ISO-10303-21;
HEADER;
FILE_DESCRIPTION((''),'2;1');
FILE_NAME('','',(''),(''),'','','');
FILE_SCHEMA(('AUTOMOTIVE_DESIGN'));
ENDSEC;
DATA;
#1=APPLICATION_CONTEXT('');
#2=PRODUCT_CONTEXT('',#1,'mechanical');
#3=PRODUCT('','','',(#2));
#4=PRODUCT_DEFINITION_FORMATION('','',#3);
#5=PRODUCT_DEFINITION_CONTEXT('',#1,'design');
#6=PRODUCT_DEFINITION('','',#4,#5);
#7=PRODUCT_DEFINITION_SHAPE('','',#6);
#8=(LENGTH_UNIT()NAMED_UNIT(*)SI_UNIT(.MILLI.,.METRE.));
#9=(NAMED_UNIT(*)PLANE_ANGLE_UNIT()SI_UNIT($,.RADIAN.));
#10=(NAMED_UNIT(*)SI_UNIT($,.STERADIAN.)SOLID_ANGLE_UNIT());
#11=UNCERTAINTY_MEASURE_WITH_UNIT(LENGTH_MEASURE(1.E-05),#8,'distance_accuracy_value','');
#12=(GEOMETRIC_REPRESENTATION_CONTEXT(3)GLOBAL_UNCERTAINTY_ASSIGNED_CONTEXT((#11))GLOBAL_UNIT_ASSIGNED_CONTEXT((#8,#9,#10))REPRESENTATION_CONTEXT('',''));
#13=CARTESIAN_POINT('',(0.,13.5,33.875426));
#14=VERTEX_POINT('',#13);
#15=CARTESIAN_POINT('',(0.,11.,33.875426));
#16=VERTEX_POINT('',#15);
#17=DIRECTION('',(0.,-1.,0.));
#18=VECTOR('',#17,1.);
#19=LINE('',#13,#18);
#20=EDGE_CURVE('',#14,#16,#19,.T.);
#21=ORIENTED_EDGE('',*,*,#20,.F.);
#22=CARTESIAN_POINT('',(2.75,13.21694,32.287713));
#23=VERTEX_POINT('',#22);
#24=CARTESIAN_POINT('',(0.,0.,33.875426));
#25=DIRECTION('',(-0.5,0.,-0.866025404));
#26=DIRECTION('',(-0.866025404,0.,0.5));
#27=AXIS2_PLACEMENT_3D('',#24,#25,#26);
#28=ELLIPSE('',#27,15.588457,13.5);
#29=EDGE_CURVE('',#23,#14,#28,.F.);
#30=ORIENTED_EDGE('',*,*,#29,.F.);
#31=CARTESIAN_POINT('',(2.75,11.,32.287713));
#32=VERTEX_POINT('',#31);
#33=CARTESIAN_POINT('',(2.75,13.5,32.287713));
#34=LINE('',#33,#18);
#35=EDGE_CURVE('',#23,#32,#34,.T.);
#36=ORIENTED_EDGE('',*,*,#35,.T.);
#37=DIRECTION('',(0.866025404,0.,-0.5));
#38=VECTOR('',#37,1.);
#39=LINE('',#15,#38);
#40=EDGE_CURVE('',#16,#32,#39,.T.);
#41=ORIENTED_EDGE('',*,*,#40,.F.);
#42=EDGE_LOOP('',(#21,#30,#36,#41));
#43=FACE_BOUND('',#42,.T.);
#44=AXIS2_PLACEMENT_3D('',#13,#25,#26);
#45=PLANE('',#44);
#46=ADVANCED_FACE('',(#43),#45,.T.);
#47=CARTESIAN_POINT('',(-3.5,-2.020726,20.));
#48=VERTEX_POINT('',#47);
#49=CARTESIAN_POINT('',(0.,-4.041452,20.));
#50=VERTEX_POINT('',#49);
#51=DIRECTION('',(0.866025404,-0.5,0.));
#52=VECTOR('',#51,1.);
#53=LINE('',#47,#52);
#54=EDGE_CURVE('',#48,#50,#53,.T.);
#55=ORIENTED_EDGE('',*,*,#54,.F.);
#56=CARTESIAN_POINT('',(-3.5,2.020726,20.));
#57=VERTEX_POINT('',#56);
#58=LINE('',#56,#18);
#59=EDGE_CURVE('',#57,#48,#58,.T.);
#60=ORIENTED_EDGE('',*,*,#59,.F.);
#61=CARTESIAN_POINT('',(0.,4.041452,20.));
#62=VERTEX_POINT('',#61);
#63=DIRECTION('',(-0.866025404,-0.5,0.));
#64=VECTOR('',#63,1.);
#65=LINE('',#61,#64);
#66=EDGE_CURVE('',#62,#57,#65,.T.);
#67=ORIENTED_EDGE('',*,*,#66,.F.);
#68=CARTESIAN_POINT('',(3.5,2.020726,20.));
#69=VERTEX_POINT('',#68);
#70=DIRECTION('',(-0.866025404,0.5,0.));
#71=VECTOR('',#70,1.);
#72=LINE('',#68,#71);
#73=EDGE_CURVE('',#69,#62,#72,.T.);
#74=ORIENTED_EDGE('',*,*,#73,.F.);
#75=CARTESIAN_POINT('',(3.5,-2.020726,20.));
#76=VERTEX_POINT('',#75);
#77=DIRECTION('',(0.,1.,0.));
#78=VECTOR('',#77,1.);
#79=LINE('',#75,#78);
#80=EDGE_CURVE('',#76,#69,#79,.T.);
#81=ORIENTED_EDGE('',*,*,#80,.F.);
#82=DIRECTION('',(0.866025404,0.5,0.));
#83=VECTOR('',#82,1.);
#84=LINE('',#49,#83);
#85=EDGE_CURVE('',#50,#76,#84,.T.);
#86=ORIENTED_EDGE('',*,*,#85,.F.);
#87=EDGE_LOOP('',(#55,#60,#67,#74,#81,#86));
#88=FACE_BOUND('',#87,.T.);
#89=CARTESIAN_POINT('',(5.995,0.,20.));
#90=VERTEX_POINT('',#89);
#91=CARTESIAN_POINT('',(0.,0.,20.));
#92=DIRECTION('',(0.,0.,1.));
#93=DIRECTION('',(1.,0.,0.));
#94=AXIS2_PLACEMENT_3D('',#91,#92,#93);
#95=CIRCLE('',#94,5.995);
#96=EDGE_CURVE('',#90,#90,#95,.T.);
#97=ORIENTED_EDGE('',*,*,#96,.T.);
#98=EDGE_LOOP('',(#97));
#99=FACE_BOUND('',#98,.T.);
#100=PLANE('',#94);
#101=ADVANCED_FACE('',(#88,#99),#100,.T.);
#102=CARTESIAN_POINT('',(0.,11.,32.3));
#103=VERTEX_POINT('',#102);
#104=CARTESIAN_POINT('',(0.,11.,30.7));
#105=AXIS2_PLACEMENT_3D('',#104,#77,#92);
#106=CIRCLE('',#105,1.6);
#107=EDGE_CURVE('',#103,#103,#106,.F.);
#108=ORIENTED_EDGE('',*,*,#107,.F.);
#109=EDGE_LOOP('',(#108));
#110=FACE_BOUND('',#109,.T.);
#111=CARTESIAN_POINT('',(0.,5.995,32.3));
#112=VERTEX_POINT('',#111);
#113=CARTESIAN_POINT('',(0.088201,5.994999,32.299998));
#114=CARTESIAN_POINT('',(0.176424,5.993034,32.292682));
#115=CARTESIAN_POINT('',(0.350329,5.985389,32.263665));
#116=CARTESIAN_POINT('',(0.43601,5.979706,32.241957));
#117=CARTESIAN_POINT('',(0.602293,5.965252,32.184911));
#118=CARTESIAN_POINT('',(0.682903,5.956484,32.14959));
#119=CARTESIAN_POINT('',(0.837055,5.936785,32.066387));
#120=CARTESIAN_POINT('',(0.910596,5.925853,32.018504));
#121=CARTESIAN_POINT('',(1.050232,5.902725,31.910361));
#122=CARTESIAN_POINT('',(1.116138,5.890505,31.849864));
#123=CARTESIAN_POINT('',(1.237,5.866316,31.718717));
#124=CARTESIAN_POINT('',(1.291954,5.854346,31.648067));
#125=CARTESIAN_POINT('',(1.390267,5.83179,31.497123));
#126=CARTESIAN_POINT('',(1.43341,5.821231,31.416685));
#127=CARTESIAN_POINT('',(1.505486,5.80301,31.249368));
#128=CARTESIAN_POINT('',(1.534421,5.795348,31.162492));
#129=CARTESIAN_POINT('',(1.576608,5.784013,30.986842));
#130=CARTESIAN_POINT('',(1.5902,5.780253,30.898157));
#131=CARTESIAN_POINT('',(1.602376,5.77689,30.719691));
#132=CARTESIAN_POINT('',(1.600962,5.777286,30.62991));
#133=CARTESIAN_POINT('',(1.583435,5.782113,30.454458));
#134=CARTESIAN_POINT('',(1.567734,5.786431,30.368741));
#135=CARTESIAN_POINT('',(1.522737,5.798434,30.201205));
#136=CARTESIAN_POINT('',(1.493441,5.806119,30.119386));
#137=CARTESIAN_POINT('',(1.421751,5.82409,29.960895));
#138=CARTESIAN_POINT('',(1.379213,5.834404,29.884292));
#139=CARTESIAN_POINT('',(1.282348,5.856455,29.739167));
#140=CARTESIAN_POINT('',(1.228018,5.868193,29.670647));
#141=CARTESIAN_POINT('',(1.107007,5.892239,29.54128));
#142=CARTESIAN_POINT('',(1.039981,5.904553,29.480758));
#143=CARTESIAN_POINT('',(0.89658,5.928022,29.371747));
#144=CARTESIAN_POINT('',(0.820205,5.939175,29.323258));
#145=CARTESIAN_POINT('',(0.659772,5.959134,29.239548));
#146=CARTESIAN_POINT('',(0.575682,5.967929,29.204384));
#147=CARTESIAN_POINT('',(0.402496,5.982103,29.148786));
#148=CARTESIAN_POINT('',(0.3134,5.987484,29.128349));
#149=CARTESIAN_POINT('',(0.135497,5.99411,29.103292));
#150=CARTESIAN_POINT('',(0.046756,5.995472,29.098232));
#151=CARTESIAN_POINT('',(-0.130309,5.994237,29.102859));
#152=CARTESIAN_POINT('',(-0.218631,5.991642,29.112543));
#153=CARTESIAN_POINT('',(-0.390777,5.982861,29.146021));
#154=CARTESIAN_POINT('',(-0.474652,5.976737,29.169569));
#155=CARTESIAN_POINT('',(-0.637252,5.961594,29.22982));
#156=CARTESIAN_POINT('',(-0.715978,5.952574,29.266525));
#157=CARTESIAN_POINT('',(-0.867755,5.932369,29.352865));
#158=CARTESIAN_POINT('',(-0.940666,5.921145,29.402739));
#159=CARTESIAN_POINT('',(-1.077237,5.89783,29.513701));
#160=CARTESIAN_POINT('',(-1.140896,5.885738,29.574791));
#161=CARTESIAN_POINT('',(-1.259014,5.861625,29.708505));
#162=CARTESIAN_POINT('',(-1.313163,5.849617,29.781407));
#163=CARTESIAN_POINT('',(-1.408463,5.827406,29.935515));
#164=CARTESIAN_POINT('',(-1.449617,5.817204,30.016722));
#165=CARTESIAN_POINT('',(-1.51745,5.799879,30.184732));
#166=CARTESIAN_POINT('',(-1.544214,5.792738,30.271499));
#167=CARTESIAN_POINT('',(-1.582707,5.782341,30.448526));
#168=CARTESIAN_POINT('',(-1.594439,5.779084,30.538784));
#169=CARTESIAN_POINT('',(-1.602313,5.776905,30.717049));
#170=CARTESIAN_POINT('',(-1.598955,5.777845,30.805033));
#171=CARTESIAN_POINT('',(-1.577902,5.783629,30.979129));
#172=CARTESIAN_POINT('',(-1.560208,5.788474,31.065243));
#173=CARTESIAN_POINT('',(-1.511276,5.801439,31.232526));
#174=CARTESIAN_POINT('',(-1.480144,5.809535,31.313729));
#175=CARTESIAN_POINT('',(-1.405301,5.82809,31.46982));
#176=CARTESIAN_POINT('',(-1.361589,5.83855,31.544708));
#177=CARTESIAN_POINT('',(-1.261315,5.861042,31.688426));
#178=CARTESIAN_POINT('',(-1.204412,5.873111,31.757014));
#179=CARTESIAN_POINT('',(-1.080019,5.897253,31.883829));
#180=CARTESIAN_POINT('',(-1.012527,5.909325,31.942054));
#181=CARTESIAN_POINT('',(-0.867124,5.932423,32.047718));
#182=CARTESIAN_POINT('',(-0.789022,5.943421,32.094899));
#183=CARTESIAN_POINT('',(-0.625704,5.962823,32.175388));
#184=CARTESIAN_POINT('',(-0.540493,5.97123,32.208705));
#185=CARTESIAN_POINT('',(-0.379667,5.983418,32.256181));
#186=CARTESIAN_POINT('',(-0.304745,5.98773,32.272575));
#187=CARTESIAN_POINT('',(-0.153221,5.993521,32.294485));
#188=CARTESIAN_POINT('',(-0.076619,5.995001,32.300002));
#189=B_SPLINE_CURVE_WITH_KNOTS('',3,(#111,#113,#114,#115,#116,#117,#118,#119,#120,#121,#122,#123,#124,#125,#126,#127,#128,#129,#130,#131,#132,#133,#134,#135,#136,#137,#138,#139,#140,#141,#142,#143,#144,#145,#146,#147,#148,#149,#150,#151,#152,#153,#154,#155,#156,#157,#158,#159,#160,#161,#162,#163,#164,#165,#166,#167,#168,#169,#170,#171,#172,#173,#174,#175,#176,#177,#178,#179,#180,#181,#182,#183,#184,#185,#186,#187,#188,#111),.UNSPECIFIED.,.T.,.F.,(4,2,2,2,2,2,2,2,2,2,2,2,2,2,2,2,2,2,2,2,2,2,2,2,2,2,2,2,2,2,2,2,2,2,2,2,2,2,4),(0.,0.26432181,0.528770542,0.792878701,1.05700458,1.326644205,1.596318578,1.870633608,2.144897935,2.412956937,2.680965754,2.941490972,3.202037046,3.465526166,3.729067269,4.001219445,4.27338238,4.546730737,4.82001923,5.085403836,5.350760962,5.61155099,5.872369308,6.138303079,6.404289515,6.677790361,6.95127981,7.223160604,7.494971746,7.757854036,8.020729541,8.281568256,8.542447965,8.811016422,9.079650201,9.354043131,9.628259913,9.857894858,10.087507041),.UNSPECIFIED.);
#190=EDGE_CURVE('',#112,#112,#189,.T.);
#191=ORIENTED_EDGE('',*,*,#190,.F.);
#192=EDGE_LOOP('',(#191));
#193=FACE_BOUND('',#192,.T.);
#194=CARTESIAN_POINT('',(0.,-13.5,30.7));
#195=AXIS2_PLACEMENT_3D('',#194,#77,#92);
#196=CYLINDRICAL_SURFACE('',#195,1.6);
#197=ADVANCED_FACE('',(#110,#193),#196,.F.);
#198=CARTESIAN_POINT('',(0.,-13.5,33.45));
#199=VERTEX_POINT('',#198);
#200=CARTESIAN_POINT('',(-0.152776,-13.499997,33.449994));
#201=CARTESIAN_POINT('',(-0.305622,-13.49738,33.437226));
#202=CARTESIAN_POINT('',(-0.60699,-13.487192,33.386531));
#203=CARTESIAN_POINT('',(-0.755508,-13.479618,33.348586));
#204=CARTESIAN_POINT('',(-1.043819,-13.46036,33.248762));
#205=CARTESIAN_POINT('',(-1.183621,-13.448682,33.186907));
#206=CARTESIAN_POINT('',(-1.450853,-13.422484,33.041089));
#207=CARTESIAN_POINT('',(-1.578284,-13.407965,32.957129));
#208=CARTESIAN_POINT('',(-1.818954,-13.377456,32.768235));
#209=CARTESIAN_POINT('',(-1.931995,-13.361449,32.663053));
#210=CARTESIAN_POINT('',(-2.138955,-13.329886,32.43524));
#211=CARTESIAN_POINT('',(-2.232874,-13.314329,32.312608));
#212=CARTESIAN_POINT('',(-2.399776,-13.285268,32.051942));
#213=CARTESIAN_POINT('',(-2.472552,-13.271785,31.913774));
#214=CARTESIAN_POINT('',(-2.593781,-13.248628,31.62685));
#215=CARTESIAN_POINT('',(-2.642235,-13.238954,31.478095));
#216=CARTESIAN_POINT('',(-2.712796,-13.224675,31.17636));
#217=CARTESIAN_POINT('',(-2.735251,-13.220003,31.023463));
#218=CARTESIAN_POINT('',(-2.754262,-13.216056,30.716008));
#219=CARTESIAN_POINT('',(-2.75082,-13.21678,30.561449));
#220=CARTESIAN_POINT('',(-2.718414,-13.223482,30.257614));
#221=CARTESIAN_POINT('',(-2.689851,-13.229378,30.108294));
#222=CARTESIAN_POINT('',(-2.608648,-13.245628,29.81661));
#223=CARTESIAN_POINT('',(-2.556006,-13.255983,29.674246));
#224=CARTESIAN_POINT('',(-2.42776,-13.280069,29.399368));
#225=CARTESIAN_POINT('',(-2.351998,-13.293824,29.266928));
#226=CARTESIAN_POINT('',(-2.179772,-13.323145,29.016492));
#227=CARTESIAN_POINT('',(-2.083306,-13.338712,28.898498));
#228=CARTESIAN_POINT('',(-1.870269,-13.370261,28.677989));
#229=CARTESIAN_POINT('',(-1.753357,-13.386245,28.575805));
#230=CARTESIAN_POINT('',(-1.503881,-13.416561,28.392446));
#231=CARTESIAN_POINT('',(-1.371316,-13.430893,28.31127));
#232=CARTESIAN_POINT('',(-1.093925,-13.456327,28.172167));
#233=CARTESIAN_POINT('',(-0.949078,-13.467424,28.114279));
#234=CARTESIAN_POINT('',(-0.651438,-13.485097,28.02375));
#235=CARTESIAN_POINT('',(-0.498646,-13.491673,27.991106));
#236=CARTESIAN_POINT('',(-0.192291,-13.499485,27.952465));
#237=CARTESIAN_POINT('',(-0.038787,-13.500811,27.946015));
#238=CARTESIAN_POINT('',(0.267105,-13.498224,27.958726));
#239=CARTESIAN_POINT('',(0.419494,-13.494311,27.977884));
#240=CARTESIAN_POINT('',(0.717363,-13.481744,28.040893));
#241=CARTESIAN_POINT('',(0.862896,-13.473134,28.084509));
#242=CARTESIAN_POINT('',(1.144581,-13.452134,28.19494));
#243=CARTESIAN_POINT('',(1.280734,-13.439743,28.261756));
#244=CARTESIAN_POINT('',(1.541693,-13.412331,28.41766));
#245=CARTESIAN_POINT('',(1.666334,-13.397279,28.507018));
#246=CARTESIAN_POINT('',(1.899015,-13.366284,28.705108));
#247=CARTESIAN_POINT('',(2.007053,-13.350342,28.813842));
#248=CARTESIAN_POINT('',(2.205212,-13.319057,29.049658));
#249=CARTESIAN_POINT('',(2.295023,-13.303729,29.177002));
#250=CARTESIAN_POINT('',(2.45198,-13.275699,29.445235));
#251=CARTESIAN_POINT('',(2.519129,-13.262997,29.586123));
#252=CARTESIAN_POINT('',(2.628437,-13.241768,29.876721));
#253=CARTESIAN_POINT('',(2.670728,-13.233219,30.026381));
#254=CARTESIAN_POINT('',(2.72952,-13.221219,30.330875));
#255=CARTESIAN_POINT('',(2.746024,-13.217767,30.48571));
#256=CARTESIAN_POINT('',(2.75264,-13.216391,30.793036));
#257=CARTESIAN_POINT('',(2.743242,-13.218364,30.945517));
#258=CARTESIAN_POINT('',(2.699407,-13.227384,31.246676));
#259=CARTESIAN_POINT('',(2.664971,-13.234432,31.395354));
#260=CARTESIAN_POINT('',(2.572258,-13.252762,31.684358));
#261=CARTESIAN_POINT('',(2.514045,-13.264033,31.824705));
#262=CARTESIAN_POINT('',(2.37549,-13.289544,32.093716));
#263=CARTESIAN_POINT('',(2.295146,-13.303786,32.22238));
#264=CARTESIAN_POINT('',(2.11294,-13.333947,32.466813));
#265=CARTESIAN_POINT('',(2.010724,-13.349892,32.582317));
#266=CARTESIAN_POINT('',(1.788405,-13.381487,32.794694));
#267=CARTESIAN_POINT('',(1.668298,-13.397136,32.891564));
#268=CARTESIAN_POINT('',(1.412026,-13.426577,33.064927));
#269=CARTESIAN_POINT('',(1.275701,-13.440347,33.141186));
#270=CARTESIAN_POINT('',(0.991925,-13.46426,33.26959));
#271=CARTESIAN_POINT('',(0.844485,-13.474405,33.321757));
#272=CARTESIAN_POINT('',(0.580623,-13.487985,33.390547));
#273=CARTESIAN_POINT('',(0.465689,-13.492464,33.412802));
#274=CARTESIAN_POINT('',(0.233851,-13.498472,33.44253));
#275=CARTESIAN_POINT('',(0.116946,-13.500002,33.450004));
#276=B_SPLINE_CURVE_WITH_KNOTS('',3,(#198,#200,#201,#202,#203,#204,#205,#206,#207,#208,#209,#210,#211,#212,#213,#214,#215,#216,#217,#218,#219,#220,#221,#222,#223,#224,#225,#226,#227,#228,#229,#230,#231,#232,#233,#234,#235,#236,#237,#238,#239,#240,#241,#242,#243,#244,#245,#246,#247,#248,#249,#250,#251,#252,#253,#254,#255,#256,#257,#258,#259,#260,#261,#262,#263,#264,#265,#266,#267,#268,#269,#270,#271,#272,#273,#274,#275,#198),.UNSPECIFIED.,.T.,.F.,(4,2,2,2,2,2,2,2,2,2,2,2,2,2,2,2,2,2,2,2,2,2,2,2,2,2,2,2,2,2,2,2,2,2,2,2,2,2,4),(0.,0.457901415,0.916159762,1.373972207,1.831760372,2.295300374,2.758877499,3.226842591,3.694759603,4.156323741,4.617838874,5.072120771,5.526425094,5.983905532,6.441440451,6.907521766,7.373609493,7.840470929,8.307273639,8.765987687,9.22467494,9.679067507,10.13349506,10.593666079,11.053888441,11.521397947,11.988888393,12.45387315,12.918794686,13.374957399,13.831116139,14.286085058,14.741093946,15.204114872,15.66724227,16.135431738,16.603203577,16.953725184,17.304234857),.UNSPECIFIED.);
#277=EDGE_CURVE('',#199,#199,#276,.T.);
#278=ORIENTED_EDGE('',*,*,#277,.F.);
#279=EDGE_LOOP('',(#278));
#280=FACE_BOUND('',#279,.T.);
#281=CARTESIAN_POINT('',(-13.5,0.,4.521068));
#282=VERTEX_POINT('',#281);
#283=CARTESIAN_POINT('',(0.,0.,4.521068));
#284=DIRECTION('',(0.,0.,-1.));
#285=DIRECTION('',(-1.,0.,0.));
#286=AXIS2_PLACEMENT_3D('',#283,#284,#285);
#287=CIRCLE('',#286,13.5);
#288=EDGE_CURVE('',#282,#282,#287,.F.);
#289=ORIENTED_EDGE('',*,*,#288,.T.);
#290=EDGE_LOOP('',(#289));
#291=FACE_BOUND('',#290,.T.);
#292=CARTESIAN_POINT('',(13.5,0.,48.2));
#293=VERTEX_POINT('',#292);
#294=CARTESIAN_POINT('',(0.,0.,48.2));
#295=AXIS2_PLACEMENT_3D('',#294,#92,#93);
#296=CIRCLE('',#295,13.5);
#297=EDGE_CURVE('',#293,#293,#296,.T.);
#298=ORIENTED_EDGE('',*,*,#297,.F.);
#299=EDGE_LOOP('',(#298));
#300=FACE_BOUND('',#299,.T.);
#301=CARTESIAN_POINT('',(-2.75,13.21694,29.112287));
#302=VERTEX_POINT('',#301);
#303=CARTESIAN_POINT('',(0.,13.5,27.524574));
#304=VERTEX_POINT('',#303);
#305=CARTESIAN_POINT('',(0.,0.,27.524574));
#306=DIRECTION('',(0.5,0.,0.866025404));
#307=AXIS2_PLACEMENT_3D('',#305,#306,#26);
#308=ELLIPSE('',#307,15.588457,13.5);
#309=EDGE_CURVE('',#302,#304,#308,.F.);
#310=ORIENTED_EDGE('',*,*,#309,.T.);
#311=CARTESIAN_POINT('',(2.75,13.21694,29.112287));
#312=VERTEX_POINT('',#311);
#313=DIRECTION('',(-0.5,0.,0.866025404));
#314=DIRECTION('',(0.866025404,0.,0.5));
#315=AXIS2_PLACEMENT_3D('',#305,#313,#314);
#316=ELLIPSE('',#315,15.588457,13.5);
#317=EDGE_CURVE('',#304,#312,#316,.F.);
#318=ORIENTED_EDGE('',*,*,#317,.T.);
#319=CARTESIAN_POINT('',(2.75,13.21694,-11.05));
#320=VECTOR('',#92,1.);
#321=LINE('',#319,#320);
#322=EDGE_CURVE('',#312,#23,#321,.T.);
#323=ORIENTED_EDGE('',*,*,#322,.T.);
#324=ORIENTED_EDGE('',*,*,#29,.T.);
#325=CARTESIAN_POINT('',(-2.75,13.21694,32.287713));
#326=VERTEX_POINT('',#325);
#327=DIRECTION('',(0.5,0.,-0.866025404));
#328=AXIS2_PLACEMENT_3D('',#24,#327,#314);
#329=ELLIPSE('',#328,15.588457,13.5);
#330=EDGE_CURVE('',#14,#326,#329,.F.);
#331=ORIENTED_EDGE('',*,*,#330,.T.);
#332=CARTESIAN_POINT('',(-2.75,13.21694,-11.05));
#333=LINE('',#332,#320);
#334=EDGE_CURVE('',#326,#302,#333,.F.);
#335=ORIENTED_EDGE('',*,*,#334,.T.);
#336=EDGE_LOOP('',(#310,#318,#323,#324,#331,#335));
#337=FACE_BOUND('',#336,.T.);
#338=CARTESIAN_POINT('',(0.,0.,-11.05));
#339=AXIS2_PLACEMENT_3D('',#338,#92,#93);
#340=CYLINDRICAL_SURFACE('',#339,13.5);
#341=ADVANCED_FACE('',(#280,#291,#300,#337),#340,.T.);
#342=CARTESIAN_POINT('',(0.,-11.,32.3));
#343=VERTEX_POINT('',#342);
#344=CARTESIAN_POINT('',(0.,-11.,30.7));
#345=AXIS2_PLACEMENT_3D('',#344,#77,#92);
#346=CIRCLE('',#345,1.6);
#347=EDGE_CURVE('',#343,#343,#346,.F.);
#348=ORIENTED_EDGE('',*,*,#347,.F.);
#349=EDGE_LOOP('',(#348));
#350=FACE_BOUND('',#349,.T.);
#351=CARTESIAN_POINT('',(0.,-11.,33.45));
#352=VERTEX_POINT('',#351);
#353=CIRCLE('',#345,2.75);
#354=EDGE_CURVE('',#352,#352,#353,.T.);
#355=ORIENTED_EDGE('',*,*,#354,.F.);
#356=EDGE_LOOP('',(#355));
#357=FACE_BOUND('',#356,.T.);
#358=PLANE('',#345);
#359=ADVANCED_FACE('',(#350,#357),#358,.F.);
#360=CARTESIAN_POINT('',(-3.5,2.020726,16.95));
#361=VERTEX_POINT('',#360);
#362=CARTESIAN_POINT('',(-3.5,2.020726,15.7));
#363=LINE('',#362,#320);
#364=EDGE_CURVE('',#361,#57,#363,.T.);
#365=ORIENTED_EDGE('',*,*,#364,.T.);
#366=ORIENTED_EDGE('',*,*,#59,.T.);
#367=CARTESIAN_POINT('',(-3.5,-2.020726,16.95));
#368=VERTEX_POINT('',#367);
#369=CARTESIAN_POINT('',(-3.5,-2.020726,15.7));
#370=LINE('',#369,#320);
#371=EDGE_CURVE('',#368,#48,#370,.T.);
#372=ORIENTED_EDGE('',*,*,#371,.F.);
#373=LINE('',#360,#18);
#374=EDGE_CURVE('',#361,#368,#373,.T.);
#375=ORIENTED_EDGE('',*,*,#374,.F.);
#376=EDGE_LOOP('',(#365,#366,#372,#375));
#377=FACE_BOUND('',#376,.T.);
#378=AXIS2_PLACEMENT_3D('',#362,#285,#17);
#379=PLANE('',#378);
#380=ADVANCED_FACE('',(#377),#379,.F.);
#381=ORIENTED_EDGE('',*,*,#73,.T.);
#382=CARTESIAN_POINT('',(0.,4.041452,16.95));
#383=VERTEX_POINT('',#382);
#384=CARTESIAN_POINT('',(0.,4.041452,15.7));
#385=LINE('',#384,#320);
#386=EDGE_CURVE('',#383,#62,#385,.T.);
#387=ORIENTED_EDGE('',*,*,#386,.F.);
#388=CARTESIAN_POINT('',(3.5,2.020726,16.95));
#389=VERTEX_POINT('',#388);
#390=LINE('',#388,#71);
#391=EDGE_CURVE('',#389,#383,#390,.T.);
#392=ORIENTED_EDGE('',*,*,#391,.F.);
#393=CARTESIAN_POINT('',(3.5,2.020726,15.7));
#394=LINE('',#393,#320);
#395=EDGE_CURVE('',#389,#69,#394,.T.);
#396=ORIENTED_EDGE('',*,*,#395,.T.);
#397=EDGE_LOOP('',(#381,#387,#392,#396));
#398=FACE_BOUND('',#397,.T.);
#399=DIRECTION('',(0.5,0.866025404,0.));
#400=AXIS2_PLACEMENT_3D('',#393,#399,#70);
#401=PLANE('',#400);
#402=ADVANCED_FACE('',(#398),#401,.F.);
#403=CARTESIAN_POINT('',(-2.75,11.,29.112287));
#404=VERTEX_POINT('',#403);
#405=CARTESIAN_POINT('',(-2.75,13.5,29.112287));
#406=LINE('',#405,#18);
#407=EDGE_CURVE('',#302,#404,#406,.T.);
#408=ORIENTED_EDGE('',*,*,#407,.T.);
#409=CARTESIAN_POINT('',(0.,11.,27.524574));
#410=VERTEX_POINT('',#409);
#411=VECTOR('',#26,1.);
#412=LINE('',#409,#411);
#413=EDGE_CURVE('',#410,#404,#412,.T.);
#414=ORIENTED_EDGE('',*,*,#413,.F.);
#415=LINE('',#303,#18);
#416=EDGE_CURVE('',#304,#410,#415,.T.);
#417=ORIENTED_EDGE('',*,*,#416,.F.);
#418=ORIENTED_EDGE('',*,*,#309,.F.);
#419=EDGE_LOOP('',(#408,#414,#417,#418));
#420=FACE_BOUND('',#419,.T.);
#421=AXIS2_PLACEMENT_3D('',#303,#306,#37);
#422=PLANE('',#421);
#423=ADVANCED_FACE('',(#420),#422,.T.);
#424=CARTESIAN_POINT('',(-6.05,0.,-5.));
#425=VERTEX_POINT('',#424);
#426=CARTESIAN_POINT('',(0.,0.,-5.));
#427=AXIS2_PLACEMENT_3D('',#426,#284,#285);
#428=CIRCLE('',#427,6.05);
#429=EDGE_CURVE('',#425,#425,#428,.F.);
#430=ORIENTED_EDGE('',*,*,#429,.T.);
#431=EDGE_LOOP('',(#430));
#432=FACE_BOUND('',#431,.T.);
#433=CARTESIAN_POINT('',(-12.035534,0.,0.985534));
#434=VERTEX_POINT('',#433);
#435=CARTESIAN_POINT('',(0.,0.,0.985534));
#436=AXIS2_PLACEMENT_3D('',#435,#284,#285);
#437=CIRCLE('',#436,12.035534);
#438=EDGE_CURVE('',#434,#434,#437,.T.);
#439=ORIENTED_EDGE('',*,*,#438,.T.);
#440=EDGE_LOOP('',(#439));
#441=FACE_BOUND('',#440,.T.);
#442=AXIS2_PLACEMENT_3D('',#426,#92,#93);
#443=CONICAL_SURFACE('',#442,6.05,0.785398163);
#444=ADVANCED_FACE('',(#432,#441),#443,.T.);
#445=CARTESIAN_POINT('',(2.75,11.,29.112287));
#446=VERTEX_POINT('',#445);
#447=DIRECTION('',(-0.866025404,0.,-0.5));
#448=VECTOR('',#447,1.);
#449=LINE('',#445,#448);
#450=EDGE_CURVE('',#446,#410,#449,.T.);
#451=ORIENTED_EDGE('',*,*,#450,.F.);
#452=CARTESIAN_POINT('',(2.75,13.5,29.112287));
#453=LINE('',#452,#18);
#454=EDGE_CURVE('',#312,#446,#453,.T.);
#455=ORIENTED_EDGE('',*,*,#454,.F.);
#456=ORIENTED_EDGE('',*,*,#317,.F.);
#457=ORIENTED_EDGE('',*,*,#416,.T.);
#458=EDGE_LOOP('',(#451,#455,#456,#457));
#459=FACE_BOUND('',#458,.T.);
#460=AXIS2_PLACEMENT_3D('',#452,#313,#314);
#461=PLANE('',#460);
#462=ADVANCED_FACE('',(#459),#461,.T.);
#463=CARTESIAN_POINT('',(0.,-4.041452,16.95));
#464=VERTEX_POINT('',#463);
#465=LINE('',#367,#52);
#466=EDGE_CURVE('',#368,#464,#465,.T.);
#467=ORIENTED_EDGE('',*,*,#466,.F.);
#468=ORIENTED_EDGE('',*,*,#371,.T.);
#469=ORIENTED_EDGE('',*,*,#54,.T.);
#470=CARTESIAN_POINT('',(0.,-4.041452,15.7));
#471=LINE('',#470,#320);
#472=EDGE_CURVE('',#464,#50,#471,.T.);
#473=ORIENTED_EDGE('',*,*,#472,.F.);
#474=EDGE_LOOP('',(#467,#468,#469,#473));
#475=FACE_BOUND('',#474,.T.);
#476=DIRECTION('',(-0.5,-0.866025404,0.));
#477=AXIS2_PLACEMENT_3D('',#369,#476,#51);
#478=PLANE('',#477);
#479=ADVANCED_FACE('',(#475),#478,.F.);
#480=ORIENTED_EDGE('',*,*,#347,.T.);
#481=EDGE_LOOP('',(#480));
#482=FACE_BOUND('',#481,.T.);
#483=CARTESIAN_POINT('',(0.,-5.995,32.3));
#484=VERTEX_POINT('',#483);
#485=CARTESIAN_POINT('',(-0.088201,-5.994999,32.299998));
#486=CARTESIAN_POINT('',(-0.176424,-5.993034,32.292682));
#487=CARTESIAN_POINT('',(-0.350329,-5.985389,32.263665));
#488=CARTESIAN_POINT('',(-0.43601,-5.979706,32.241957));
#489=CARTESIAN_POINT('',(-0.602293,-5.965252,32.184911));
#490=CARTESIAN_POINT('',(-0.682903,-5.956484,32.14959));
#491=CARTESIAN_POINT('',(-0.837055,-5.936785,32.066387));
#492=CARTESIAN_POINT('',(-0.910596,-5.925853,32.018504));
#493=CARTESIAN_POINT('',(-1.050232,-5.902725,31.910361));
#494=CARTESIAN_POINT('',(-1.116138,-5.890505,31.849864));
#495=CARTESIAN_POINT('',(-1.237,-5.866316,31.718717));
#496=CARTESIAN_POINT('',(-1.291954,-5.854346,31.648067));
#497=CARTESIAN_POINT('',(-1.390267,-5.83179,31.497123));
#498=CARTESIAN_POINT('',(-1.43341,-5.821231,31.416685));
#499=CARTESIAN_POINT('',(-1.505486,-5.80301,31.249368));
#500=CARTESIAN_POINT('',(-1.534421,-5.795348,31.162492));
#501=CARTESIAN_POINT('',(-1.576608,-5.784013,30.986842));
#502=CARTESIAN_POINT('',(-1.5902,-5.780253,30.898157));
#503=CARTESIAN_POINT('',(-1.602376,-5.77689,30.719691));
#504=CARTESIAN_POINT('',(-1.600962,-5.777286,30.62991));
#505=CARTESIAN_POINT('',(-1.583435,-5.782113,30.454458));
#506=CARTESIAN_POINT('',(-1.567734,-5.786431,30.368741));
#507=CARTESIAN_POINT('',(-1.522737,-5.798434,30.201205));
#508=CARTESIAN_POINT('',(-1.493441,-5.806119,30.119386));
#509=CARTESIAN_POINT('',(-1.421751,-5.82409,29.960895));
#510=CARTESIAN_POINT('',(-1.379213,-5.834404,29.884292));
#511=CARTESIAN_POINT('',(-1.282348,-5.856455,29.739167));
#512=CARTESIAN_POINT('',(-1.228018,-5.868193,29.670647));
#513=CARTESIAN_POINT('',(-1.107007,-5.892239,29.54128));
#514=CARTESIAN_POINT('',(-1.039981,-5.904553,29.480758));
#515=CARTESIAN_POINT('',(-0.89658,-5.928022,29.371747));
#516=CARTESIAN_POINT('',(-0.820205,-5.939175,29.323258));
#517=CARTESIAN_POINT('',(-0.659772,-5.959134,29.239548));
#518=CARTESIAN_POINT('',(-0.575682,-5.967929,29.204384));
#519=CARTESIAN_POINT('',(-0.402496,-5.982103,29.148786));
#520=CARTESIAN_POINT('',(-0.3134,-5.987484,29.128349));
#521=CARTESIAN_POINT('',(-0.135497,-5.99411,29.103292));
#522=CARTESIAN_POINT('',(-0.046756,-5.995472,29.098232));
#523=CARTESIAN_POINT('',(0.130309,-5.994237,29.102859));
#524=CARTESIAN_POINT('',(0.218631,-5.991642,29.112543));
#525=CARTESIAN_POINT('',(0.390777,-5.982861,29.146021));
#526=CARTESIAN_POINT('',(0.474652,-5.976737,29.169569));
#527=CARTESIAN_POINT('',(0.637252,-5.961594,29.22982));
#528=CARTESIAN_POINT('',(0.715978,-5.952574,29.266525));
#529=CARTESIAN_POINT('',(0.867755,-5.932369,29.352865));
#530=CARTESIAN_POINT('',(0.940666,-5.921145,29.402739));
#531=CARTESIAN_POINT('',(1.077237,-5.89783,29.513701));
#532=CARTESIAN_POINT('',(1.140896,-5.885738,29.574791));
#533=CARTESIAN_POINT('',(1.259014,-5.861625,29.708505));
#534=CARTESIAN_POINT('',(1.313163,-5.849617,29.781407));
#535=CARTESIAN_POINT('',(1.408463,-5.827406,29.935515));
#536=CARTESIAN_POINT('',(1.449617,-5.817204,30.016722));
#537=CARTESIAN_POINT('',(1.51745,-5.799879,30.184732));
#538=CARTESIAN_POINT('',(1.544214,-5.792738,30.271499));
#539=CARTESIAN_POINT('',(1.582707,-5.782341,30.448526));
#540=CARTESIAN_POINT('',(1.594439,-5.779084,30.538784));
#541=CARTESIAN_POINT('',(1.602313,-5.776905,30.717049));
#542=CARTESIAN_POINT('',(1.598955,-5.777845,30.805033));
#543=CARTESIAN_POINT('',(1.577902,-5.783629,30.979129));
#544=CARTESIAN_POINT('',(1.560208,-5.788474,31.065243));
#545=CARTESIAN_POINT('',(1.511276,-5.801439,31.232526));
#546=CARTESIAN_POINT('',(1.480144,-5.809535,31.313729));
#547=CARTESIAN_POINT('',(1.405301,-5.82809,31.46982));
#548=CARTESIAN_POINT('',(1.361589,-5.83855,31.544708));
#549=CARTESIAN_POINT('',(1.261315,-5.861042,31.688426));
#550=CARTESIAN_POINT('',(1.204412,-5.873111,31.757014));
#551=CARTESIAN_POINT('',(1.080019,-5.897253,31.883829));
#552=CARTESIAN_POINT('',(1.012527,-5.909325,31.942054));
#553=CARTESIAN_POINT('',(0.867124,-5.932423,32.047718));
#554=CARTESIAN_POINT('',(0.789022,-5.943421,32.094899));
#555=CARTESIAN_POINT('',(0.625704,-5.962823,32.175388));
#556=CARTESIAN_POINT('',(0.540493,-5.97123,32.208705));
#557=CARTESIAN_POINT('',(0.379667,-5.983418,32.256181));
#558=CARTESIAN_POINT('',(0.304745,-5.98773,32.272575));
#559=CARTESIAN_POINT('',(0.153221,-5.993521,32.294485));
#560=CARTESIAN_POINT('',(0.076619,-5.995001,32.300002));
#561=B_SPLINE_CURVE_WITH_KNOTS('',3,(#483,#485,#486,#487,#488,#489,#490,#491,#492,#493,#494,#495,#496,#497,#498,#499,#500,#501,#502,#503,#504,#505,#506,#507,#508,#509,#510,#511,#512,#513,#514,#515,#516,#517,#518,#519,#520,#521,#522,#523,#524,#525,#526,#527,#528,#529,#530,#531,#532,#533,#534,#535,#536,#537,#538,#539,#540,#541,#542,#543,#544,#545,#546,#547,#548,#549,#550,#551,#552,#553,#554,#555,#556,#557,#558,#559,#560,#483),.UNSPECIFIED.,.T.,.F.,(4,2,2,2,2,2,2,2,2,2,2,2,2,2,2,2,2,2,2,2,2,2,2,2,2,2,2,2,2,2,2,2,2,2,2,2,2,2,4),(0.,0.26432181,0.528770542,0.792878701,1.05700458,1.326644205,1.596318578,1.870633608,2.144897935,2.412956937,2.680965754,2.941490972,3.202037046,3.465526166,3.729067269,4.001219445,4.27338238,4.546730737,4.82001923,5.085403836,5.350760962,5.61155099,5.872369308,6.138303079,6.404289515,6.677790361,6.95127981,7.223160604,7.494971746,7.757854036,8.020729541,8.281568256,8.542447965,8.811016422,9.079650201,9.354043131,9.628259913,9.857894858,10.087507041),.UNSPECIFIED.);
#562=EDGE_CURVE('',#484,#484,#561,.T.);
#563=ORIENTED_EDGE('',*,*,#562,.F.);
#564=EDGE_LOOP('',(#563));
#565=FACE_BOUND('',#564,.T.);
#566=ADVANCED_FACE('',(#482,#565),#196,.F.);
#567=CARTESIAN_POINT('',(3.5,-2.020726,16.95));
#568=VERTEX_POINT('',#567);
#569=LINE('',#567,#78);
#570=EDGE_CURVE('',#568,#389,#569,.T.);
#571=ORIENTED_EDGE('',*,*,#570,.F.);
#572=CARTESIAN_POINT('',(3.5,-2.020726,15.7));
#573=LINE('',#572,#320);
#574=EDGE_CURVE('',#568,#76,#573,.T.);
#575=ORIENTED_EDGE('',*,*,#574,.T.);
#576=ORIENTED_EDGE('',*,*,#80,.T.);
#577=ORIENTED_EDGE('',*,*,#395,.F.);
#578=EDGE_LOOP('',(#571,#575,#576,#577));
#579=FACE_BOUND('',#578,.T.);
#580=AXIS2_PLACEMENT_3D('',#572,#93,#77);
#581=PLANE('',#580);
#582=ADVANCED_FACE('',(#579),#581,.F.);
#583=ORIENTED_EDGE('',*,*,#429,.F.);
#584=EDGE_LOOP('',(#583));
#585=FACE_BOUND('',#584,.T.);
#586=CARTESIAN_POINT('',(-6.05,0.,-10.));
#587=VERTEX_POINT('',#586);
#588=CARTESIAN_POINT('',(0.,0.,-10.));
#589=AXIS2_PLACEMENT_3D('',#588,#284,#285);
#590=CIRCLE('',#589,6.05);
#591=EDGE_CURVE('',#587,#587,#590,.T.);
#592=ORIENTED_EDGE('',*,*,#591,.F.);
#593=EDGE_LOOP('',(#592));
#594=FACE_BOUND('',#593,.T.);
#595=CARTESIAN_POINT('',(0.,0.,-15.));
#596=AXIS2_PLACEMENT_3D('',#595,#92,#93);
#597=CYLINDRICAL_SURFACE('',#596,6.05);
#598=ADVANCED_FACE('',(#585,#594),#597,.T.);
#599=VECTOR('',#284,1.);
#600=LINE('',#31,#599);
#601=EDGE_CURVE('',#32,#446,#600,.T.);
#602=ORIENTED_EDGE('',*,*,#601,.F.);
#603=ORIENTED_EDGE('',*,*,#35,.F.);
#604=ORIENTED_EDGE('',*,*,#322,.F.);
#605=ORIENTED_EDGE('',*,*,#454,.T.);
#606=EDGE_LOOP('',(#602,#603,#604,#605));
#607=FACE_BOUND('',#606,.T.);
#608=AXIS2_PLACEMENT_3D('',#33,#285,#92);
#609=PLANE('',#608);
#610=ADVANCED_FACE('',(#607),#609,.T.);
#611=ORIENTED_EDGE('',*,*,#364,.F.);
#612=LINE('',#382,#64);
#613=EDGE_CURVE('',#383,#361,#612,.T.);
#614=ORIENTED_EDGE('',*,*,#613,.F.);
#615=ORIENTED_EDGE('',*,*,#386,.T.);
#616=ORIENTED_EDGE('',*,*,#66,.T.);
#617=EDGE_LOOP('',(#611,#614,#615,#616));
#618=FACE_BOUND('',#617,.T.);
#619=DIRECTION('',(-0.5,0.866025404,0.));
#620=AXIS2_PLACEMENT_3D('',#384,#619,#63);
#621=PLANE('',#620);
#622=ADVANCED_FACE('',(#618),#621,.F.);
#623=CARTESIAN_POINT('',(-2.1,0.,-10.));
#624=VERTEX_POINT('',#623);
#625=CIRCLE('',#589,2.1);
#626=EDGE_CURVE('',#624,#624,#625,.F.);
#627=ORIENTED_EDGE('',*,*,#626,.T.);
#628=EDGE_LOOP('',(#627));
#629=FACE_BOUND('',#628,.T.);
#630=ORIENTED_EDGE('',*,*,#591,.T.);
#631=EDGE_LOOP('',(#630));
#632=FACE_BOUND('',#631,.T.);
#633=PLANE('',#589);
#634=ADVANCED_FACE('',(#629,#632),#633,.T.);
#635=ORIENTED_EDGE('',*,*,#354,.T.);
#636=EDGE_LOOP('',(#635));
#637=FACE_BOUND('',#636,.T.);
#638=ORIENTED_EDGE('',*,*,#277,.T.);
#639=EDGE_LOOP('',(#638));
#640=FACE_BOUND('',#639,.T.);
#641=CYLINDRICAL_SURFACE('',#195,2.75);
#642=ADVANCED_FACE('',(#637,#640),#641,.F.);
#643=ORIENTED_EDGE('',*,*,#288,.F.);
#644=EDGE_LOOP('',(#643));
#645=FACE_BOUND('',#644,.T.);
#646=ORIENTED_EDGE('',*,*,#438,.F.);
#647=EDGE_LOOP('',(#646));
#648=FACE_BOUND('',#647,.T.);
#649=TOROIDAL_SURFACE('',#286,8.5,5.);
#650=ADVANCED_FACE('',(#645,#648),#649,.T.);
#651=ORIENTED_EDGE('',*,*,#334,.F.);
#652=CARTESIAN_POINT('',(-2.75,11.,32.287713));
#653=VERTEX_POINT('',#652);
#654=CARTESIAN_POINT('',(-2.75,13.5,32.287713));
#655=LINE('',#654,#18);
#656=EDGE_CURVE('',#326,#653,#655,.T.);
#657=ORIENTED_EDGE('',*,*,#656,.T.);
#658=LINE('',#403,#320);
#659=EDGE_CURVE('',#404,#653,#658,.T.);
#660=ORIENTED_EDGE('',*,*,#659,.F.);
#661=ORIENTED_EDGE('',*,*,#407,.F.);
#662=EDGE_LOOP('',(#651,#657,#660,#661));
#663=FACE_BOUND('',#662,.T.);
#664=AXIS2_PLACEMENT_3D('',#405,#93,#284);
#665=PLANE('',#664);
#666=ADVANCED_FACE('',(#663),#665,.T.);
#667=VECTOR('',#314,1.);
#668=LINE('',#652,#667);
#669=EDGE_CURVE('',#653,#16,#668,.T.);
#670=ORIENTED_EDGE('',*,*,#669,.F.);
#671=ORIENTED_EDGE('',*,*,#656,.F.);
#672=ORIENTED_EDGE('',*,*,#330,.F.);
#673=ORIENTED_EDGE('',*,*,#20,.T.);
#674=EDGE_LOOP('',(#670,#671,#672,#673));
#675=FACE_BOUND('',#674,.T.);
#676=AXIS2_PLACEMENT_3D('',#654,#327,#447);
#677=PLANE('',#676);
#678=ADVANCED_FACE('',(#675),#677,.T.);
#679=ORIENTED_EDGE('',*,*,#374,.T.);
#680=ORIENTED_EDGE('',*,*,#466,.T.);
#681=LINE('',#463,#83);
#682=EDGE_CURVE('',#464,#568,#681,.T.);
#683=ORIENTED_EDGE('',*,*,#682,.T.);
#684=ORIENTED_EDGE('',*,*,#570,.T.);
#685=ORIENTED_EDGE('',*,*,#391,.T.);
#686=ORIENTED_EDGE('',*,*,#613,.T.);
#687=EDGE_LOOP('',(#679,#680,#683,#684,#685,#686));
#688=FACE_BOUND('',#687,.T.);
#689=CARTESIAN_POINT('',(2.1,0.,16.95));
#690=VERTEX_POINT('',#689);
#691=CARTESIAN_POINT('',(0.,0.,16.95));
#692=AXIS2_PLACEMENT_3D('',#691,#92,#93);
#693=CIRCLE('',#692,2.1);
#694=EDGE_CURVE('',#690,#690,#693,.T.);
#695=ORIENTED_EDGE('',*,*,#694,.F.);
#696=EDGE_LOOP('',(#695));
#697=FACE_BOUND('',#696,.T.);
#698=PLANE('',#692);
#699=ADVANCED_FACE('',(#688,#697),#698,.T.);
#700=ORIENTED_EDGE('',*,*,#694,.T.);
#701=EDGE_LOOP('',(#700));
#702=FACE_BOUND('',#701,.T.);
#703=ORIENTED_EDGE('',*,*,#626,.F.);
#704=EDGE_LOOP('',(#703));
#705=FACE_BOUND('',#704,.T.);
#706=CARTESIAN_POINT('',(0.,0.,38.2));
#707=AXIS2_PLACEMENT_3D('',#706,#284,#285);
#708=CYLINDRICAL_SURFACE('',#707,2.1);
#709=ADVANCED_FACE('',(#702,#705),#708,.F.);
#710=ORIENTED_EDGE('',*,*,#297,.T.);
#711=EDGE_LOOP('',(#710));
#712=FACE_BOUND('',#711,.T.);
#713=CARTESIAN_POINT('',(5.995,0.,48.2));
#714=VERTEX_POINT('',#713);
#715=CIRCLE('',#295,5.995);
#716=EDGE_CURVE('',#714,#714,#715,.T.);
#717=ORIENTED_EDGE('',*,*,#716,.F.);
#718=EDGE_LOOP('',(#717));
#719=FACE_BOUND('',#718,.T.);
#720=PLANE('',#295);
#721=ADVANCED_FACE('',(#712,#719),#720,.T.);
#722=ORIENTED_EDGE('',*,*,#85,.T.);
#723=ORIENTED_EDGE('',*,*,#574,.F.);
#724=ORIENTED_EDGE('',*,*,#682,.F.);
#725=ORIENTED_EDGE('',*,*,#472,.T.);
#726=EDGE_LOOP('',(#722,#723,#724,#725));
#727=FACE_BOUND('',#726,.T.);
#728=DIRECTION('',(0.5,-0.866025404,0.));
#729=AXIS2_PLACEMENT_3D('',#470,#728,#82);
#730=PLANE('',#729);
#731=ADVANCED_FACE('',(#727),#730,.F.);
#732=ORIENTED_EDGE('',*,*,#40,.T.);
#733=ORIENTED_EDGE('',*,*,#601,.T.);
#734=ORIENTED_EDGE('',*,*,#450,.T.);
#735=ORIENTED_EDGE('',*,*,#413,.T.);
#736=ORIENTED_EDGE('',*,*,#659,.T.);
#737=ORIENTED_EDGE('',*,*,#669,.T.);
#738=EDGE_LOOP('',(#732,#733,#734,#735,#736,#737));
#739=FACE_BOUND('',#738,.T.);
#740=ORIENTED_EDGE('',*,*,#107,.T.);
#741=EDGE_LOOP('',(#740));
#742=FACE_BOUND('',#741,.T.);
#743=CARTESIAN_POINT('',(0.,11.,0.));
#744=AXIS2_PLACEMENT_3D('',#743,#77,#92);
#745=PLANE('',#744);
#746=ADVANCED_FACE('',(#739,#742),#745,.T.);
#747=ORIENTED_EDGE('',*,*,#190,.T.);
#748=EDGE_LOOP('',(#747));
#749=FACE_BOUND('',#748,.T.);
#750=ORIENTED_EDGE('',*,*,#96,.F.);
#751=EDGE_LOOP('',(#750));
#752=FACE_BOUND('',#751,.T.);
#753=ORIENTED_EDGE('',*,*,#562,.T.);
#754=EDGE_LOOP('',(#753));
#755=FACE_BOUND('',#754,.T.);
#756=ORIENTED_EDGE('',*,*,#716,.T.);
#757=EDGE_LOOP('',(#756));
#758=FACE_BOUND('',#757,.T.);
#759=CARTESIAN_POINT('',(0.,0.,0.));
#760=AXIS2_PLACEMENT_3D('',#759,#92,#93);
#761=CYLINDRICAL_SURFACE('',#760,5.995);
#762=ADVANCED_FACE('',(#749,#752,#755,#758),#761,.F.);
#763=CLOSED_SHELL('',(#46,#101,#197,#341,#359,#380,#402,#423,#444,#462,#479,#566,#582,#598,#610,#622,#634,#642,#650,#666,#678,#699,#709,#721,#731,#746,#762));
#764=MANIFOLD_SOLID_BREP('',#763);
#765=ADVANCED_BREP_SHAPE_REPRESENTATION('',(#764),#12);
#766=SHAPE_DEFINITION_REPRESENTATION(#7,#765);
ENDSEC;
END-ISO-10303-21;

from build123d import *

# Parameters (mm, degrees)
SKETCH1_R                 = 11.05
SKETCH1_R_2               = 6.05
BOSS_EXTRUDE1_DEPTH       = 10
SKETCH2_R                 = 6.05
BOSS_EXTRUDE2_DEPTH       = 15
BOSS_EXTRUDE3_START       = 5
SKETCH3_R                 = 11.05
BOSS_EXTRUDE3_DEPTH       = 5
CHAMFER1_SIZE             = 5
SKETCH4_R                 = 6.05
SKETCH4_R_2               = 5.995
BOSS_EXTRUDE4_DEPTH       = 10
SKETCH5_R                 = 11.05
SKETCH5_R_2               = 5.995
BOSS_EXTRUDE5_DEPTH       = 28.2
SKETCH6_R                 = 11.05
BOSS_EXTRUDE6_DEPTH       = 18.2
CUT_EXTRUDE1_DEPTH        = 2.5
SKETCH8_R                 = 2.1
CUT_EXTRUDE2_DEPTH        = 56.44767804
SKETCH9_R                 = 2.8
CUT_EXTRUDE3_DEPTH        = 3.2
CUT_EXTRUDE4_START        = -3.2
SKETCH10_R                = 6.05
CUT_EXTRUDE4_DEPTH        = 3.2
CUT_EXTRUDE5_START        = -1.8
SKETCH11_R                = 6.05
CUT_EXTRUDE5_DEPTH        = 1.8
CUT_EXTRUDE6_DEPTH        = 42.272811874
CUT_EXTRUDE6_DEPTH_BACK   = 42.272811874
CUT_EXTRUDE7_START        = 8.5
CUT_EXTRUDE7_OUTLINE_R    = 1.6
CUT_EXTRUDE7_DEPTH        = 2.55
CUT_EXTRUDE8_START        = -11.050000102
CUT_EXTRUDE8_OUTLINE_R    = 2.75
CUT_EXTRUDE8_OUTLINE_R_2  = 1.6
CUT_EXTRUDE8_DEPTH        = 2.550000102
BOSS_EXTRUDE8_REACH       = 52.67
SKETCH15_R                = 13.5
SKETCH15_R_2              = 5.995
CUT_EXTRUDE9_DEPTH        = 43.705269085
CUT_EXTRUDE9_DEPTH_BACK   = 43.705269085
CUT_EXTRUDE10_START       = 11
CUT_EXTRUDE10_OUTLINE_R   = 1.6
CUT_EXTRUDE10_DEPTH       = 2.5
CUT_EXTRUDE11_START       = -13.500000102
CUT_EXTRUDE11_OUTLINE_R   = 2.75
CUT_EXTRUDE11_OUTLINE_R_2 = 1.6
CUT_EXTRUDE11_DEPTH       = 2.500000102
FILLET3_R                 = 5
SKETCH16_R                = 13.5
SKETCH16_R_2              = 5.995
BOSS_EXTRUDE9_DEPTH       = 10
SKETCH17_R                = 5.995
BOSS_EXTRUDE10_DEPTH      = 1.8
SKETCH19_R                = 2.1
BOSS_EXTRUDE12_DEPTH      = 1.25


# Read off the part's stored shape, not the designer's step: Cut-Extrude7, Cut-Extrude8, Cut-Extrude10, Cut-Extrude11
with BuildPart() as part:
    # Sketch1 → Boss-Extrude1 (new body)
    with BuildSketch(Plane.XY):
        Circle(SKETCH1_R)
        Circle(SKETCH1_R_2, mode=Mode.SUBTRACT)
    extrude(amount=BOSS_EXTRUDE1_DEPTH)



with BuildPart() as body_2:
    # Sketch2 → Boss-Extrude2 (new body)
    with BuildSketch(Plane(origin=(0, 0, 0), x_dir=(-1, 0, 0), z_dir=(0, 0, -1))):
        with Locations(Location((0, 0, 0), (0, 0, 180))):
            Circle(SKETCH2_R)
    extrude(amount=BOSS_EXTRUDE2_DEPTH)


with BuildPart() as part_1:
    add(part.part)

    add(body_2.part)  # Boss-Extrude3 merges body 2
    # Sketch3 → Boss-Extrude3 (add)
    with BuildSketch(Plane(origin=(0, 0, 0), x_dir=(-1, 0, 0), z_dir=(0, 0, -1)).offset(BOSS_EXTRUDE3_START)):
        Circle(SKETCH3_R)
    extrude(amount=-BOSS_EXTRUDE3_DEPTH)

    # Chamfer1
    chamfer1_edges = [part_1.edges().sort_by_distance(p)[0] for p in [
        (11.05, 0, -5),
    ]]
    chamfer(chamfer1_edges, length=CHAMFER1_SIZE - 0.0001)  # a hair under: the kernel refuses the full size

    # Sketch4 → Boss-Extrude4 (add)
    with BuildSketch(Plane.XY.offset(10)):
        with Locations(Location((0, 0, 0), (0, 0, 180))):
            Circle(SKETCH4_R)
        Circle(SKETCH4_R_2, mode=Mode.SUBTRACT)
    extrude(amount=-BOSS_EXTRUDE4_DEPTH)

    # Sketch5 → Boss-Extrude5 (add)
    with BuildSketch(Plane.XY.offset(10)):
        with Locations(Location((0, 0, 0), (0, 0, 180))):
            Circle(SKETCH5_R)
        Circle(SKETCH5_R_2, mode=Mode.SUBTRACT)
    extrude(amount=BOSS_EXTRUDE5_DEPTH)

    # Sketch6 → Boss-Extrude6 (add)
    with BuildSketch(Plane.XY):
        with Locations(Location((0, 0, 0), (0, 0, 180))):
            Circle(SKETCH6_R)
    extrude(amount=BOSS_EXTRUDE6_DEPTH)

    # Sketch7 → Cut-Extrude1 (cut)
    with BuildSketch(Plane.XY.offset(18.2)):
        Polygon((0, 4.041451884), (-3.5, 2.020725942), (-3.5, -2.020725942), (0, -4.041451884), (3.5, -2.020725942), (3.5, 2.020725942), align=None)
    extrude(amount=-CUT_EXTRUDE1_DEPTH, mode=Mode.SUBTRACT)

    # Sketch8 → Cut-Extrude2 (cut, through all)
    with BuildSketch(Plane(origin=(0, 0, -15), x_dir=(-1, 0, 0), z_dir=(0, 0, -1))):
        Circle(SKETCH8_R)
    extrude(amount=-CUT_EXTRUDE2_DEPTH, mode=Mode.SUBTRACT)

    # Sketch9 → Cut-Extrude3 (cut)
    with BuildSketch(Plane(origin=(0, 0, -15), x_dir=(-1, 0, 0), z_dir=(0, 0, -1))):
        Circle(SKETCH9_R)
    extrude(amount=-CUT_EXTRUDE3_DEPTH, mode=Mode.SUBTRACT)

    # Sketch10 → Cut-Extrude4 (cut)
    with BuildSketch(Plane(origin=(0, 0, -15), x_dir=(-1, 0, 0), z_dir=(0, 0, -1)).offset(CUT_EXTRUDE4_START)):
        Circle(SKETCH10_R)
    extrude(amount=CUT_EXTRUDE4_DEPTH, mode=Mode.SUBTRACT)

    # Sketch11 → Cut-Extrude5 (cut)
    with BuildSketch(Plane(origin=(0, 0, -11.8), x_dir=(-1, 0, 0), z_dir=(0, 0, -1)).offset(CUT_EXTRUDE5_START)):
        Circle(SKETCH11_R)
    extrude(amount=CUT_EXTRUDE5_DEPTH, mode=Mode.SUBTRACT)

    # Sketch12 → Cut-Extrude6 (cut, two sides: drawn at the far end of the back side and taken through both)
    with BuildSketch(Plane(origin=(0, 0, 0), x_dir=(1, 0, 0), z_dir=(0, 1, 0)).offset(-CUT_EXTRUDE6_DEPTH_BACK)):
        with BuildLine():
            ThreePointArc((-1.6, -30.7), (-1.13137085, -31.83137085), (0, -32.3))
            Line((0, -32.3), (0, -30.7))
            Line((0, -30.7), (-1.6, -30.7))
        make_face()
        with BuildLine():
            Line((0, -30.7), (0, -32.3))
            ThreePointArc((0, -32.3), (1.13137085, -31.83137085), (1.6, -30.7))
            Line((1.6, -30.7), (0, -30.7))
        make_face()
        with BuildLine():
            ThreePointArc((0, -29.1), (-1.13137085, -29.56862915), (-1.6, -30.7))
            Line((-1.6, -30.7), (0, -30.7))
            Line((0, -30.7), (0, -29.1))
        make_face()
        with BuildLine():
            Line((0, -29.1), (0, -30.7))
            Line((0, -30.7), (1.6, -30.7))
            ThreePointArc((1.6, -30.7), (1.13137085, -29.56862915), (0, -29.1))
        make_face()
    extrude(amount=CUT_EXTRUDE6_DEPTH + CUT_EXTRUDE6_DEPTH_BACK, mode=Mode.SUBTRACT)

    # Cut-Extrude7 outline → Cut-Extrude7 (cut)
    with BuildSketch(Plane(origin=(0, 0, 0), x_dir=(1, 0, 0), z_dir=(0, 1, 0)).offset(CUT_EXTRUDE7_START)):
        Polygon((2.75, -29.11228676), (0, -27.524573519), (-2.75, -29.11228676), (-2.75, -32.28771324), (0, -33.875426481), (2.75, -32.28771324), align=None)
        with Locations((0, -30.7)):
            Circle(CUT_EXTRUDE7_OUTLINE_R, mode=Mode.SUBTRACT)
    extrude(amount=CUT_EXTRUDE7_DEPTH, mode=Mode.SUBTRACT)

    # Cut-Extrude8 outline → Cut-Extrude8 (cut)
    with BuildSketch(Plane(origin=(0, 0, 0), x_dir=(1, 0, 0), z_dir=(0, 1, 0)).offset(CUT_EXTRUDE8_START)):
        with Locations((0, -30.7)):
            Circle(CUT_EXTRUDE8_OUTLINE_R)
        with Locations((0, -30.7)):
            Circle(CUT_EXTRUDE8_OUTLINE_R_2, mode=Mode.SUBTRACT)
    extrude(amount=CUT_EXTRUDE8_DEPTH, mode=Mode.SUBTRACT)

    # Boss-Extrude8: up to this cone (the profile starts inside it)
    boss_extrude8_end = Plane(origin=(0, 0, 38.2), z_dir=(0, 0, 1)).offset(-49.249999) * Cone(1e-06, 151.67, 151.669999, align=(Align.CENTER, Align.CENTER, Align.MIN), mode=Mode.PRIVATE)
    # Sketch15 → Boss-Extrude8 (add, up to the surface)
    with BuildSketch(Plane.XY.offset(38.2), mode=Mode.PRIVATE) as boss_extrude8_sk1:
        Circle(SKETCH15_R)
        Circle(SKETCH15_R_2, mode=Mode.SUBTRACT)
    boss_extrude8_tool1 = extrude(boss_extrude8_sk1.sketch, amount=-BOSS_EXTRUDE8_REACH, mode=Mode.PRIVATE) & boss_extrude8_end
    add(boss_extrude8_tool1.solids().sort_by_distance((-13.118162, 0, 38.2))[0])

    # Sketch12<4> → Cut-Extrude9 (cut, two sides: drawn at the far end of the back side and taken through both)
    with BuildSketch(Plane(origin=(0, 0, 0), x_dir=(1, 0, 0), z_dir=(0, 1, 0)).offset(-CUT_EXTRUDE9_DEPTH_BACK)):
        with BuildLine():
            ThreePointArc((-1.6, -30.7), (-1.13137085, -31.83137085), (0, -32.3))
            Line((0, -32.3), (0, -30.7))
            Line((0, -30.7), (-1.6, -30.7))
        make_face()
        with BuildLine():
            Line((0, -30.7), (0, -32.3))
            ThreePointArc((0, -32.3), (1.13137085, -31.83137085), (1.6, -30.7))
            Line((1.6, -30.7), (0, -30.7))
        make_face()
        with BuildLine():
            ThreePointArc((0, -29.1), (-1.13137085, -29.56862915), (-1.6, -30.7))
            Line((-1.6, -30.7), (0, -30.7))
            Line((0, -30.7), (0, -29.1))
        make_face()
        with BuildLine():
            Line((0, -29.1), (0, -30.7))
            Line((0, -30.7), (1.6, -30.7))
            ThreePointArc((1.6, -30.7), (1.13137085, -29.56862915), (0, -29.1))
        make_face()
    extrude(amount=CUT_EXTRUDE9_DEPTH + CUT_EXTRUDE9_DEPTH_BACK, mode=Mode.SUBTRACT)

    # Cut-Extrude10 outline → Cut-Extrude10 (cut)
    with BuildSketch(Plane(origin=(0, 0, 0), x_dir=(1, 0, 0), z_dir=(0, 1, 0)).offset(CUT_EXTRUDE10_START)):
        Polygon((-2.75, -32.28771324), (0, -33.875426481), (2.75, -32.28771324), (2.75, -29.11228676), (0, -27.524573519), (-2.75, -29.11228676), align=None)
        with Locations((0, -30.7)):
            Circle(CUT_EXTRUDE10_OUTLINE_R, mode=Mode.SUBTRACT)
    extrude(amount=CUT_EXTRUDE10_DEPTH, mode=Mode.SUBTRACT)

    # Cut-Extrude11 outline → Cut-Extrude11 (cut)
    with BuildSketch(Plane(origin=(0, 0, 0), x_dir=(1, 0, 0), z_dir=(0, 1, 0)).offset(CUT_EXTRUDE11_START)):
        with Locations((0, -30.7)):
            Circle(CUT_EXTRUDE11_OUTLINE_R)
        with Locations((0, -30.7)):
            Circle(CUT_EXTRUDE11_OUTLINE_R_2, mode=Mode.SUBTRACT)
    extrude(amount=CUT_EXTRUDE11_DEPTH, mode=Mode.SUBTRACT)

    # Fillet3
    fillet3_edges = [part_1.edges().sort_by_distance(p)[0] for p in [
        (-13.5, 0, 2.45),
    ]]
    fillet(fillet3_edges, radius=FILLET3_R)

    # Sketch16 → Boss-Extrude9 (add)
    with BuildSketch(Plane.XY.offset(38.2)):
        Circle(SKETCH16_R)
        Circle(SKETCH16_R_2, mode=Mode.SUBTRACT)
    extrude(amount=BOSS_EXTRUDE9_DEPTH)

    # Sketch17 → Boss-Extrude10 (add)
    with BuildSketch(Plane.XY.offset(18.2)):
        Circle(SKETCH17_R)
        Polygon((0, 4.041451884), (-3.5, 2.020725942), (-3.5, -2.020725942), (0, -4.041451884), (3.5, -2.020725942), (3.5, 2.020725942), align=None, mode=Mode.SUBTRACT)
    extrude(amount=BOSS_EXTRUDE10_DEPTH)

    # Sketch19 → Boss-Extrude12 (add)
    with BuildSketch(Plane.XY.offset(15.7)):
        Polygon((0, 4.041451884), (-3.5, 2.020725942), (-3.5, -2.020725942), (0, -4.041451884), (3.5, -2.020725942), (3.5, 2.020725942), align=None)
        with Locations(Location((0, 0, 0), (0, 0, 180))):
            Circle(SKETCH19_R, mode=Mode.SUBTRACT)
    extrude(amount=BOSS_EXTRUDE12_DEPTH)


solid = part_1.part
